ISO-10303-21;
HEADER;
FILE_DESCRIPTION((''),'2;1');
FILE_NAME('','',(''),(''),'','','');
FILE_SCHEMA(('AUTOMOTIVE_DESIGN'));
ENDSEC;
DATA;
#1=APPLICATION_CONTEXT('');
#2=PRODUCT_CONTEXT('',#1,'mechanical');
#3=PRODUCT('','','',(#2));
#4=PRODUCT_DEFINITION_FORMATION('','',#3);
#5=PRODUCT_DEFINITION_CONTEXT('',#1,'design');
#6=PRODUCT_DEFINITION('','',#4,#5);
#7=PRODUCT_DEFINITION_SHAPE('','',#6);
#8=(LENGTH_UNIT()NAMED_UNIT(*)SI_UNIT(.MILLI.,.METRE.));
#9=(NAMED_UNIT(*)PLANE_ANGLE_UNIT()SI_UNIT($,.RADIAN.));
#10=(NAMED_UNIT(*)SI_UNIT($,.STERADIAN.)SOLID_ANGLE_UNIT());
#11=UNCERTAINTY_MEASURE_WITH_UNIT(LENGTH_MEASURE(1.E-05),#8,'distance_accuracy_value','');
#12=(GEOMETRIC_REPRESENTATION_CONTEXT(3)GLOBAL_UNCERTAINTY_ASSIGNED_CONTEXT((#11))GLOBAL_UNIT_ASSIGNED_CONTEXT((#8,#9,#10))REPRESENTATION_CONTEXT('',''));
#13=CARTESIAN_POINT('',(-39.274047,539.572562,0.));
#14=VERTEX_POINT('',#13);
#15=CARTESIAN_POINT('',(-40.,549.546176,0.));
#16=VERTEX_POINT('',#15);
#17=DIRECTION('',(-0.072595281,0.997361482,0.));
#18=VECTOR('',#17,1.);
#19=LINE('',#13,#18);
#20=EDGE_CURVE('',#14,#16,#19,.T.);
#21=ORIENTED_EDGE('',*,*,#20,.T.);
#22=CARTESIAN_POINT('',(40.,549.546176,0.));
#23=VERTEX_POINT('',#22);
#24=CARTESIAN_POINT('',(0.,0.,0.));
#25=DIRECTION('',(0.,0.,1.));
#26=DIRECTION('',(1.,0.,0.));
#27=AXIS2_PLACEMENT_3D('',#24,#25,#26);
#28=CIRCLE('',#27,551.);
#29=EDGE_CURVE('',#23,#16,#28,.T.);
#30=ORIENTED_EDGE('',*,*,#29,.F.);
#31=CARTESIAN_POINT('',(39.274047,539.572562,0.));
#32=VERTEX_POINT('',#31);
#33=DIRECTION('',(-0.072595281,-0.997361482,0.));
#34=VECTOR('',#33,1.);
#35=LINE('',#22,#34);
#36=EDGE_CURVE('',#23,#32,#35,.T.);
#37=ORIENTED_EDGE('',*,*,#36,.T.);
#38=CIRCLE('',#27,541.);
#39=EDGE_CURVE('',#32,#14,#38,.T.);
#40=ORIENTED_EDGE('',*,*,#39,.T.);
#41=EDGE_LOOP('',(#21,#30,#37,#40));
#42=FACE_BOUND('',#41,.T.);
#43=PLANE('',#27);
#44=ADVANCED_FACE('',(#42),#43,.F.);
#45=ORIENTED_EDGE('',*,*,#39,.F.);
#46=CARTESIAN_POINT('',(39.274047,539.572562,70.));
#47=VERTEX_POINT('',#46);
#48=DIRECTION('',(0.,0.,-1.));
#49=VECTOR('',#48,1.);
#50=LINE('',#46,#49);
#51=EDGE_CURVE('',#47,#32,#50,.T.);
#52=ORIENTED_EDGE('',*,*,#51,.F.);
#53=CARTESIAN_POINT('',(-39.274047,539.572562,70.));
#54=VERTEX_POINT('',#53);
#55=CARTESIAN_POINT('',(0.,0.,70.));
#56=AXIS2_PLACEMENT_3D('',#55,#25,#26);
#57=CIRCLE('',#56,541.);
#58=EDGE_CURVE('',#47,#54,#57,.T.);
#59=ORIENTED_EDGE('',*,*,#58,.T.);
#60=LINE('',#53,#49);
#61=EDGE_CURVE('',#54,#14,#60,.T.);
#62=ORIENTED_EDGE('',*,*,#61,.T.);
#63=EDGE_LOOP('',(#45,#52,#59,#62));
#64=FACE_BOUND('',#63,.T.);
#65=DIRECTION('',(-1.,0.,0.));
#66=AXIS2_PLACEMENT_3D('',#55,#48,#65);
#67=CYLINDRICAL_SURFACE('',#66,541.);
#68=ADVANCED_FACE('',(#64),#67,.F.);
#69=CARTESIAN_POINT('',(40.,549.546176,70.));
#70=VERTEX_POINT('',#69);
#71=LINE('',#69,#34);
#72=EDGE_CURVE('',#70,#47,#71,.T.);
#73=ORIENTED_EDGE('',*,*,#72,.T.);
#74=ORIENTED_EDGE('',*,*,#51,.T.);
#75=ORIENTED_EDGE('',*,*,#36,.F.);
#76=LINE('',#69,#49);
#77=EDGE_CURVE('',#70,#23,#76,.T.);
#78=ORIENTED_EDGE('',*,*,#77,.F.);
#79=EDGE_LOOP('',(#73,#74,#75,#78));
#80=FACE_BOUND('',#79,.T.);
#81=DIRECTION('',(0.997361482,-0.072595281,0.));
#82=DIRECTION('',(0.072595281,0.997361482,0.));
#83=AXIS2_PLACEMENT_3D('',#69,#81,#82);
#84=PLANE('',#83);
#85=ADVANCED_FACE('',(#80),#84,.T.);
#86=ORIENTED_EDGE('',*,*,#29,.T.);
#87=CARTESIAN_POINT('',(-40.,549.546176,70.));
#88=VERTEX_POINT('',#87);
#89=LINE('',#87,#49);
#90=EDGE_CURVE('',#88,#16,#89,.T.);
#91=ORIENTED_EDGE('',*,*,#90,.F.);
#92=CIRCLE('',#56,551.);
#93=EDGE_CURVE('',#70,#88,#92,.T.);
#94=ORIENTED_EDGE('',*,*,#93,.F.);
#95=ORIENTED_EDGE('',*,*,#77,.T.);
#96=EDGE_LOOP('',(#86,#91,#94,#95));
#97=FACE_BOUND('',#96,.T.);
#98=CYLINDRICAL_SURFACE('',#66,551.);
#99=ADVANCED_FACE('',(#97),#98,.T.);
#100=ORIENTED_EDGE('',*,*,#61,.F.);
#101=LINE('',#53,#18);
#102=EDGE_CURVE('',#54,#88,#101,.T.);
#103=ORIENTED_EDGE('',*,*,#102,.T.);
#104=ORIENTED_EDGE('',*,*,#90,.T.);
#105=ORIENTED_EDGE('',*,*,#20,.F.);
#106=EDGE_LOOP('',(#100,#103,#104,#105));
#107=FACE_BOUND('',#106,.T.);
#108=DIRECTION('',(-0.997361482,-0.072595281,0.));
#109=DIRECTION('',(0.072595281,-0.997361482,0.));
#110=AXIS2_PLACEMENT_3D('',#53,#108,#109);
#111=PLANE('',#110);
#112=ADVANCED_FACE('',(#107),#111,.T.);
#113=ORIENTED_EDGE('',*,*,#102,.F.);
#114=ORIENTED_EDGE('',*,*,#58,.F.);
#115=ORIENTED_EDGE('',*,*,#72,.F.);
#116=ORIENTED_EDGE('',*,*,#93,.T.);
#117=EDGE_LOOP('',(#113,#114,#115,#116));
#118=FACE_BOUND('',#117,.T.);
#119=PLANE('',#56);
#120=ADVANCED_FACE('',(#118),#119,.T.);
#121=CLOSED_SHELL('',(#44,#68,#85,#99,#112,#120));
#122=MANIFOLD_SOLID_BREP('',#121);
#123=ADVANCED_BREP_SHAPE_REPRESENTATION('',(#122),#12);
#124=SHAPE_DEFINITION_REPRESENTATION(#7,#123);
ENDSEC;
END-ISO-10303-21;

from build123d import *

# Parameters (mm, degrees)
SM_BASE_FLANGE_1_DEPTH = 70


# Sheet-metal steps are written as plain solids
with BuildPart() as part:
    # Sketch 2 → 基体-法兰1 (new body)
    with BuildSketch(Plane.XY):
        with BuildLine():
            ThreePointArc((40, 549.546176404), (0, 551), (-40, 549.546176404))
            Line((-40, 549.546176404), (-39.274047187, 539.572561587))
            ThreePointArc((-39.274047187, 539.572561587), (0, 541), (39.274047187, 539.572561587))
            Line((39.274047187, 539.572561587), (40, 549.546176404))
        make_face()
    extrude(amount=SM_BASE_FLANGE_1_DEPTH)


solid = part.part
